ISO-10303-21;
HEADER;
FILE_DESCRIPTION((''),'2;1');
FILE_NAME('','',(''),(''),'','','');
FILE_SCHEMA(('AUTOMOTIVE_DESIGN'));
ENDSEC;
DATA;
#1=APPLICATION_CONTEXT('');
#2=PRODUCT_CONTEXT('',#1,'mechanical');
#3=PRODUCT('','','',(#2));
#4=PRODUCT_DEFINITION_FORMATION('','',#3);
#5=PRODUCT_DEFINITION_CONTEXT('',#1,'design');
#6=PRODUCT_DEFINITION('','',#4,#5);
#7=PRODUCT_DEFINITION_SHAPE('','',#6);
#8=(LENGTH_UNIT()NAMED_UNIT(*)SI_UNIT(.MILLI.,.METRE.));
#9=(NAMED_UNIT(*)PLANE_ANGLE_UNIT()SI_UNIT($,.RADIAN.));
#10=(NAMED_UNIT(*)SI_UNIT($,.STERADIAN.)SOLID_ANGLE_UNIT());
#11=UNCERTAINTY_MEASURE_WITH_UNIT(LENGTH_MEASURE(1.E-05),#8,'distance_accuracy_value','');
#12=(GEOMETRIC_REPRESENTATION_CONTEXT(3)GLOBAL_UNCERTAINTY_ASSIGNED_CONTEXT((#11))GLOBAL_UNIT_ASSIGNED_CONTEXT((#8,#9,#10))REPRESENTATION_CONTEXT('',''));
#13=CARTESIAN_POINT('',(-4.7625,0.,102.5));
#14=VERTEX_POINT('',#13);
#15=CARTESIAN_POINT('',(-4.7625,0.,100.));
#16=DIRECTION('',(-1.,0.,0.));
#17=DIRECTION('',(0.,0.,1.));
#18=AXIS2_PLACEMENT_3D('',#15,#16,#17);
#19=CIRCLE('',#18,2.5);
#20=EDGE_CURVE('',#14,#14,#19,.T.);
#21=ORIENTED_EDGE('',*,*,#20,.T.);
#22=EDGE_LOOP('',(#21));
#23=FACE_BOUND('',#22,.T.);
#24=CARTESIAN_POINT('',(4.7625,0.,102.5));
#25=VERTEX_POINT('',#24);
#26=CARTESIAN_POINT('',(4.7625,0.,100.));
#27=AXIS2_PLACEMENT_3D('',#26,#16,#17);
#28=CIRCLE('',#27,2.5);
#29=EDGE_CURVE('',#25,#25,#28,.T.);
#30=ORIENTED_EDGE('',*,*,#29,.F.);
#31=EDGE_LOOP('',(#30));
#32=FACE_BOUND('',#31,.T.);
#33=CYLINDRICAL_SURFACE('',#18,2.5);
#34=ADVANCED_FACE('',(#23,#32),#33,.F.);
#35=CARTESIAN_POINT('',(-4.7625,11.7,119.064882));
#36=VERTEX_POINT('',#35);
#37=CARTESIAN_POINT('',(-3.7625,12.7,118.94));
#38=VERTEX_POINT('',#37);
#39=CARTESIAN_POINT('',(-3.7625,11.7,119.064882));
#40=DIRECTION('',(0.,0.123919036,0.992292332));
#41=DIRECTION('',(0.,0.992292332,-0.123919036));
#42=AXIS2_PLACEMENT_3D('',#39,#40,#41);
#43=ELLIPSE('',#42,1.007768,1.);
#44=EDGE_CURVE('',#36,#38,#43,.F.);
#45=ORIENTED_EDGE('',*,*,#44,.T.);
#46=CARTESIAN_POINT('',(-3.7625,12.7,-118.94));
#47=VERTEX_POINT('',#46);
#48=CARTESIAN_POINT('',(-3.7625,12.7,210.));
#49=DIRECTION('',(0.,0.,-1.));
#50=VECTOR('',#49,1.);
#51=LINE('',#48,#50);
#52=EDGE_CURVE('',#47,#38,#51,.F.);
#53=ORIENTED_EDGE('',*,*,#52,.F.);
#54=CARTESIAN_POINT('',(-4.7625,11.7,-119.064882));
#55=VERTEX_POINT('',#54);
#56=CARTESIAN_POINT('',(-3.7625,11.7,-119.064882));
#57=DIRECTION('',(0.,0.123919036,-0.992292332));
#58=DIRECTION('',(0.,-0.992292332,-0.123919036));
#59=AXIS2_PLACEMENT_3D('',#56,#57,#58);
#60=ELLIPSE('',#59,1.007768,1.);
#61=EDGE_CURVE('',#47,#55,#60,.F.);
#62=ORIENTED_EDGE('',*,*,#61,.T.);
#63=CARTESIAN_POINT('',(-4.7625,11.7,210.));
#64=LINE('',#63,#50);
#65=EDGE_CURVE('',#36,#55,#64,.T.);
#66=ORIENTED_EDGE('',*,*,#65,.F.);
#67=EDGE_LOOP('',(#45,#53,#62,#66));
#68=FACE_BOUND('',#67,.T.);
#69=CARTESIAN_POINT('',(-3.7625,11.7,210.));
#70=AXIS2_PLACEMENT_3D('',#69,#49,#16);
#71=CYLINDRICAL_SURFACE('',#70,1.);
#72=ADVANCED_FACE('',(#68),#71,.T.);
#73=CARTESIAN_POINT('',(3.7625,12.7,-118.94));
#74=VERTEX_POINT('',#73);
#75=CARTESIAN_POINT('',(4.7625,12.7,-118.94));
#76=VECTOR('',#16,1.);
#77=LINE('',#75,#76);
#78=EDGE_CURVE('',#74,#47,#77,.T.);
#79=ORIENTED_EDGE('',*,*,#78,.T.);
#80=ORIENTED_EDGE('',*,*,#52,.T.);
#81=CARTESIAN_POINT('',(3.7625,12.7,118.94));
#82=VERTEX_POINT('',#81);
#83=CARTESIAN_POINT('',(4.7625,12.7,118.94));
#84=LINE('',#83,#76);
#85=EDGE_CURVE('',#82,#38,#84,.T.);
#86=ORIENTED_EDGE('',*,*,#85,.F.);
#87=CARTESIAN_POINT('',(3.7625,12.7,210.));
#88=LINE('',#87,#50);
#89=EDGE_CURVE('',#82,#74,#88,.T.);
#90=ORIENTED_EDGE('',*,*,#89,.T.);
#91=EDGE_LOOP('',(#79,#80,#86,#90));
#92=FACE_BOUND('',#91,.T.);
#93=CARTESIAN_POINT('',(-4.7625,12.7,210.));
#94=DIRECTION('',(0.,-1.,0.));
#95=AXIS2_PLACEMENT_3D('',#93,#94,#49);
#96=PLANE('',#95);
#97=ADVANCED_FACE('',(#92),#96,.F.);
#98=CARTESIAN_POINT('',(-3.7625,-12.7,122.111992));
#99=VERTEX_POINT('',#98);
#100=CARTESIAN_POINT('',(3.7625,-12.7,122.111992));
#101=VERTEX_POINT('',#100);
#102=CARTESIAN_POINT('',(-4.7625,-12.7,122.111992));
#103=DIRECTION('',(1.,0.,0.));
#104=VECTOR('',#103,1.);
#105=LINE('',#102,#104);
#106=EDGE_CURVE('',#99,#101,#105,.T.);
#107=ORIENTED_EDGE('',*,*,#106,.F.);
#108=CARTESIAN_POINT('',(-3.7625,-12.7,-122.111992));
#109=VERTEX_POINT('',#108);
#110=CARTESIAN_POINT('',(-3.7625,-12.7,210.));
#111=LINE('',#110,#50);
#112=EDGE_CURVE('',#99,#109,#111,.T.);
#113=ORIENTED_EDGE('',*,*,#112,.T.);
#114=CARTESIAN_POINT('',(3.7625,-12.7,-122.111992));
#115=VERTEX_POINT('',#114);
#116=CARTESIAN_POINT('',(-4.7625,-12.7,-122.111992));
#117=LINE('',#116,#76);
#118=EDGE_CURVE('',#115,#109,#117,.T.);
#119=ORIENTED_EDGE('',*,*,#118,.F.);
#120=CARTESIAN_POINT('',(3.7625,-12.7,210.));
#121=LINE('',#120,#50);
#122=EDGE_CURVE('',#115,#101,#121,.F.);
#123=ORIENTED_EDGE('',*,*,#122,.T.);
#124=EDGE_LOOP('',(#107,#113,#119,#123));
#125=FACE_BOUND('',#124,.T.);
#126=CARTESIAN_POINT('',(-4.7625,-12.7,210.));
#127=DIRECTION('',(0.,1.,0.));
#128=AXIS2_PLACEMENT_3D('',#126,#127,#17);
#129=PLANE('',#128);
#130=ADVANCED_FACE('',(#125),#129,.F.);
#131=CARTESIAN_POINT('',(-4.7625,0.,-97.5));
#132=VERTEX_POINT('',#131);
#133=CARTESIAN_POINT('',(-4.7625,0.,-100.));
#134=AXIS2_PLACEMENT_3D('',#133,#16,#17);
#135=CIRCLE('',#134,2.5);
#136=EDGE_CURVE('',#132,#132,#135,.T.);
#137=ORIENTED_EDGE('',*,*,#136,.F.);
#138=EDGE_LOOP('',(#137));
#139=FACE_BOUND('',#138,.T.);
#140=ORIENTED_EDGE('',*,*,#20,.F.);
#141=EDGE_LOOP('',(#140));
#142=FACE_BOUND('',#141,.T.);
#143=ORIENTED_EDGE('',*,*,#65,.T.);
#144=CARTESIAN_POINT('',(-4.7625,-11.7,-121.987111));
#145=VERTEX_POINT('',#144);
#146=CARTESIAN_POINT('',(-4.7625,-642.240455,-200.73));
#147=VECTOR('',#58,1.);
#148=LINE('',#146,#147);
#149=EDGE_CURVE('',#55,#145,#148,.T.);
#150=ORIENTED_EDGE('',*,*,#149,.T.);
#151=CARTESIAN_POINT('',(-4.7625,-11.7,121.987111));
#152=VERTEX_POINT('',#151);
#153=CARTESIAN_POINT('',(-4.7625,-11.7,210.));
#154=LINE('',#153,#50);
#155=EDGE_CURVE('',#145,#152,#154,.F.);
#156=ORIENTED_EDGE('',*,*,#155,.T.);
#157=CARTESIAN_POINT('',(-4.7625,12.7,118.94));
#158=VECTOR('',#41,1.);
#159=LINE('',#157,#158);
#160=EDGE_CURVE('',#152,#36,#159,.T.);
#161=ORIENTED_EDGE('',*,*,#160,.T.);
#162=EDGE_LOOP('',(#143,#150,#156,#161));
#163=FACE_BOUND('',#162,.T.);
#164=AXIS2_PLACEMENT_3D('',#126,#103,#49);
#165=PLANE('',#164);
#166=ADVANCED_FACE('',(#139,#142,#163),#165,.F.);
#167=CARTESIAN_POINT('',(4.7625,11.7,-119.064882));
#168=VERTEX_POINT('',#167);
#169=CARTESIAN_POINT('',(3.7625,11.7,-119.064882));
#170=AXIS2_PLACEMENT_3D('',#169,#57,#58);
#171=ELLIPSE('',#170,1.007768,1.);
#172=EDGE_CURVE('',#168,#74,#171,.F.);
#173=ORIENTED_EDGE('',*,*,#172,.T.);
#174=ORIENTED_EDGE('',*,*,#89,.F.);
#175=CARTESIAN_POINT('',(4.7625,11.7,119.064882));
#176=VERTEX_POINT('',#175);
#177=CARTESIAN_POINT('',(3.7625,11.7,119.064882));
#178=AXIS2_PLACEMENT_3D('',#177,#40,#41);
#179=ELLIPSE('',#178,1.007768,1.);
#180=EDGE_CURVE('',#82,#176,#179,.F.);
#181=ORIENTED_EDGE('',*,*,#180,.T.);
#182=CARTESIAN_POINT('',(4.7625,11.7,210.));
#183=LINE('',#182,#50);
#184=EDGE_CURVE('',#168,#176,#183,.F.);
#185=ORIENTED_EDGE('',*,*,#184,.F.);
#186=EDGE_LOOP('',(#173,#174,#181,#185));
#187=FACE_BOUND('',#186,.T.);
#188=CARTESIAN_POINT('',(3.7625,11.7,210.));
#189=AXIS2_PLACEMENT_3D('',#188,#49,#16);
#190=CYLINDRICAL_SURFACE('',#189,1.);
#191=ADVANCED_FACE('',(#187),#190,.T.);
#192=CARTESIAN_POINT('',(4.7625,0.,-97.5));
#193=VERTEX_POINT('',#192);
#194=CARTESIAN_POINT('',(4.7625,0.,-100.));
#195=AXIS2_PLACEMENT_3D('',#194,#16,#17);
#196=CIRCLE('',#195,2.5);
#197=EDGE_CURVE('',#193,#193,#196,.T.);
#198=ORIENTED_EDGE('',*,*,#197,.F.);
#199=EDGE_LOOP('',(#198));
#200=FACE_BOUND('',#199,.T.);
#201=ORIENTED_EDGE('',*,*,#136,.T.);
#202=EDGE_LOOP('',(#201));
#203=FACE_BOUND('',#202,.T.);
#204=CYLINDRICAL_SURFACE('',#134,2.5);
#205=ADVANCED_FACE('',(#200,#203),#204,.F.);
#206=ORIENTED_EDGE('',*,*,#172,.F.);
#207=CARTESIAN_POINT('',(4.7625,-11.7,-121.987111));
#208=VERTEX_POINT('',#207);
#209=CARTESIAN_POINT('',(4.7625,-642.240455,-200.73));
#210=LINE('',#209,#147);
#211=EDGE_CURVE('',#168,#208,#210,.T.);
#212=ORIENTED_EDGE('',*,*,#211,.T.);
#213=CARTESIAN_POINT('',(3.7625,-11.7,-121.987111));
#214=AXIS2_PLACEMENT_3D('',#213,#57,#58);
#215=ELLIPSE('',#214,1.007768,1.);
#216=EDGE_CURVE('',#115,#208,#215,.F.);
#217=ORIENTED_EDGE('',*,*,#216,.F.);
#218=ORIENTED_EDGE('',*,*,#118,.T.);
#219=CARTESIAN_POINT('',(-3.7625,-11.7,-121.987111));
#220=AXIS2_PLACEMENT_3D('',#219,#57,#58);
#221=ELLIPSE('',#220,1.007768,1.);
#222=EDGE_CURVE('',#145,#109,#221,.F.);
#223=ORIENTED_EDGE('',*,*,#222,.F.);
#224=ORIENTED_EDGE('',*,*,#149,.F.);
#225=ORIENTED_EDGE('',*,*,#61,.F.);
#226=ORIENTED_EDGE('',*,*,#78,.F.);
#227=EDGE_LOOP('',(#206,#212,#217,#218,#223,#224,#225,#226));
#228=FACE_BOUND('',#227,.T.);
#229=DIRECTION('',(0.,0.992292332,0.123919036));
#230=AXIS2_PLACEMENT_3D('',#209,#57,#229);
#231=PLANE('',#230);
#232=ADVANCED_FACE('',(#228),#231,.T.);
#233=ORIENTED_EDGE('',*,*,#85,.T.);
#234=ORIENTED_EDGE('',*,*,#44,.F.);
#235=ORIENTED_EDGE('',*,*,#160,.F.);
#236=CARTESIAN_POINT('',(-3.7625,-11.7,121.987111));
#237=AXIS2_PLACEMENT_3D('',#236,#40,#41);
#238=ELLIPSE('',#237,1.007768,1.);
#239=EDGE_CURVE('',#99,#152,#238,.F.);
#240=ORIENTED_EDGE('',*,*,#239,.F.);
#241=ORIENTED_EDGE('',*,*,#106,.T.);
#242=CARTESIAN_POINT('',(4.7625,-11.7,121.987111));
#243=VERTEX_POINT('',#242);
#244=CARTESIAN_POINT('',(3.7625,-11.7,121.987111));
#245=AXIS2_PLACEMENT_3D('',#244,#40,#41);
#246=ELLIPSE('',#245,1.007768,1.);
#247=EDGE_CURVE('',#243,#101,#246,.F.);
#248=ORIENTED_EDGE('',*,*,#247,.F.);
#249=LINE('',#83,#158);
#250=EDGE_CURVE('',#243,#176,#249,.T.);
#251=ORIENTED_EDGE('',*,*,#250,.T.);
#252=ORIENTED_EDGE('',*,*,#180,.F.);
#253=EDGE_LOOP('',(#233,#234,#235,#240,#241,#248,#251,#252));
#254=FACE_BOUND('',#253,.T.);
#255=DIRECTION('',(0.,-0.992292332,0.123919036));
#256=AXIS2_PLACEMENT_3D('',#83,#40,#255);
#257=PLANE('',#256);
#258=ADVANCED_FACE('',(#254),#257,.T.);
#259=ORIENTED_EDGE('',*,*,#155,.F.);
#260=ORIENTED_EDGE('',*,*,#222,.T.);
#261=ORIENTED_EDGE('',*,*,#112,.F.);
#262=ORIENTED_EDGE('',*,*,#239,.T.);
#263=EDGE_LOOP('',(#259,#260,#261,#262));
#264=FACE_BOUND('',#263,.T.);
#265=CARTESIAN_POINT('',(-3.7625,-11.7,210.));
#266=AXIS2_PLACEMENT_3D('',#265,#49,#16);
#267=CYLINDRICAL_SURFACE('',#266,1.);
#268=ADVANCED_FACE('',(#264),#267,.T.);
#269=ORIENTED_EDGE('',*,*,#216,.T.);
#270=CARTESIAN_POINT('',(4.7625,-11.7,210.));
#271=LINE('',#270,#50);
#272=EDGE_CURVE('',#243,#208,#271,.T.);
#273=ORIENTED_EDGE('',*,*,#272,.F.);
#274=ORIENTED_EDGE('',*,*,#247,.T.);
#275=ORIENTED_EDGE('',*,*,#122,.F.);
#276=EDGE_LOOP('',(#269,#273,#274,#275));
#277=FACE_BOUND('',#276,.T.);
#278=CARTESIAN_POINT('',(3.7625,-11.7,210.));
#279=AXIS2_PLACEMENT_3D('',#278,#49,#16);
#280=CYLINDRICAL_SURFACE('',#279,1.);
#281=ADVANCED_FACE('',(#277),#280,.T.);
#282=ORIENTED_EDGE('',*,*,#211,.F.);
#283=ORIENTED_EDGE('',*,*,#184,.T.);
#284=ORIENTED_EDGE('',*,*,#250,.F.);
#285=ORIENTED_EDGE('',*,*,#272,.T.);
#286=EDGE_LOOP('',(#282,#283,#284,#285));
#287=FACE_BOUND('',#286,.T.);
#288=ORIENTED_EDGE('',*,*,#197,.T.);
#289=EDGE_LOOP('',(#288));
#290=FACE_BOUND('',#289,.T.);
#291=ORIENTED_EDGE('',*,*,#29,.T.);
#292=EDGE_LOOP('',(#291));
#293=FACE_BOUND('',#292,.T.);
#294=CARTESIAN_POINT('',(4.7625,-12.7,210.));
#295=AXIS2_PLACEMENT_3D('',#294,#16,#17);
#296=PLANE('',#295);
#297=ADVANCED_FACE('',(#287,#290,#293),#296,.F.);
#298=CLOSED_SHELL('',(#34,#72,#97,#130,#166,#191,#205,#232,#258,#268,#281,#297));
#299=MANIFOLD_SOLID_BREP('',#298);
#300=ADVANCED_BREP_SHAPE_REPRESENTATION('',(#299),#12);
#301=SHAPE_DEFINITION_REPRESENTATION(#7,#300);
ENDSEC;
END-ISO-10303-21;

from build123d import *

# Parameters (mm, degrees)
ESBO_O1_W                 = 9.525
ESBO_O1_H                 = 25.4
RESSALTO_EXTRUS_O1_DEPTH  = 210
FILETE1_R                 = 1
CORTE_EXTRUS_O1_START     = -9.525
CORTE_EXTRUS_O1_DEPTH     = 9.525
FURO_ROSCADO_DE_M6X1_01_D = 5


# Read off the part's stored shape, not the designer's step: Corte-extrusão1
with BuildPart() as part:
    # Esboço1 → Ressalto-extrusão1 (new, symmetric)
    with BuildSketch(Plane.XY):
        Rectangle(ESBO_O1_W, ESBO_O1_H)
    extrude(amount=RESSALTO_EXTRUS_O1_DEPTH, both=True)

    # Filete1
    filete1_edges = [part.edges().sort_by_distance(p)[0] for p in [
        (4.7625, -12.7, 0),
        (-4.7625, -12.7, 0),
        (-4.7625, 12.7, 0),
        (4.7625, 12.7, 0),
    ]]
    fillet(filete1_edges, radius=FILETE1_R)

    # Corte-extrusão1 outline → Corte-extrusão1 (cut)
    with BuildSketch(Plane.ZY.offset(4.7625).offset(CORTE_EXTRUS_O1_START)):
        Polygon((118.94, 12.7), (122.111992176, -12.7), (210, -12.7), (210, 12.7), align=None)
        Polygon((-210, -12.7), (-122.111992176, -12.7), (-118.94, 12.7), (-210, 12.7), align=None)
    extrude(amount=CORTE_EXTRUS_O1_DEPTH, mode=Mode.SUBTRACT)

    # Furo roscado de M6x1.01 (through all)
    with Locations(Plane.ZY.offset(4.7625)):
        with Locations((-100, 0), (100, 0)):
            Hole(FURO_ROSCADO_DE_M6X1_01_D / 2)


solid = part.part
